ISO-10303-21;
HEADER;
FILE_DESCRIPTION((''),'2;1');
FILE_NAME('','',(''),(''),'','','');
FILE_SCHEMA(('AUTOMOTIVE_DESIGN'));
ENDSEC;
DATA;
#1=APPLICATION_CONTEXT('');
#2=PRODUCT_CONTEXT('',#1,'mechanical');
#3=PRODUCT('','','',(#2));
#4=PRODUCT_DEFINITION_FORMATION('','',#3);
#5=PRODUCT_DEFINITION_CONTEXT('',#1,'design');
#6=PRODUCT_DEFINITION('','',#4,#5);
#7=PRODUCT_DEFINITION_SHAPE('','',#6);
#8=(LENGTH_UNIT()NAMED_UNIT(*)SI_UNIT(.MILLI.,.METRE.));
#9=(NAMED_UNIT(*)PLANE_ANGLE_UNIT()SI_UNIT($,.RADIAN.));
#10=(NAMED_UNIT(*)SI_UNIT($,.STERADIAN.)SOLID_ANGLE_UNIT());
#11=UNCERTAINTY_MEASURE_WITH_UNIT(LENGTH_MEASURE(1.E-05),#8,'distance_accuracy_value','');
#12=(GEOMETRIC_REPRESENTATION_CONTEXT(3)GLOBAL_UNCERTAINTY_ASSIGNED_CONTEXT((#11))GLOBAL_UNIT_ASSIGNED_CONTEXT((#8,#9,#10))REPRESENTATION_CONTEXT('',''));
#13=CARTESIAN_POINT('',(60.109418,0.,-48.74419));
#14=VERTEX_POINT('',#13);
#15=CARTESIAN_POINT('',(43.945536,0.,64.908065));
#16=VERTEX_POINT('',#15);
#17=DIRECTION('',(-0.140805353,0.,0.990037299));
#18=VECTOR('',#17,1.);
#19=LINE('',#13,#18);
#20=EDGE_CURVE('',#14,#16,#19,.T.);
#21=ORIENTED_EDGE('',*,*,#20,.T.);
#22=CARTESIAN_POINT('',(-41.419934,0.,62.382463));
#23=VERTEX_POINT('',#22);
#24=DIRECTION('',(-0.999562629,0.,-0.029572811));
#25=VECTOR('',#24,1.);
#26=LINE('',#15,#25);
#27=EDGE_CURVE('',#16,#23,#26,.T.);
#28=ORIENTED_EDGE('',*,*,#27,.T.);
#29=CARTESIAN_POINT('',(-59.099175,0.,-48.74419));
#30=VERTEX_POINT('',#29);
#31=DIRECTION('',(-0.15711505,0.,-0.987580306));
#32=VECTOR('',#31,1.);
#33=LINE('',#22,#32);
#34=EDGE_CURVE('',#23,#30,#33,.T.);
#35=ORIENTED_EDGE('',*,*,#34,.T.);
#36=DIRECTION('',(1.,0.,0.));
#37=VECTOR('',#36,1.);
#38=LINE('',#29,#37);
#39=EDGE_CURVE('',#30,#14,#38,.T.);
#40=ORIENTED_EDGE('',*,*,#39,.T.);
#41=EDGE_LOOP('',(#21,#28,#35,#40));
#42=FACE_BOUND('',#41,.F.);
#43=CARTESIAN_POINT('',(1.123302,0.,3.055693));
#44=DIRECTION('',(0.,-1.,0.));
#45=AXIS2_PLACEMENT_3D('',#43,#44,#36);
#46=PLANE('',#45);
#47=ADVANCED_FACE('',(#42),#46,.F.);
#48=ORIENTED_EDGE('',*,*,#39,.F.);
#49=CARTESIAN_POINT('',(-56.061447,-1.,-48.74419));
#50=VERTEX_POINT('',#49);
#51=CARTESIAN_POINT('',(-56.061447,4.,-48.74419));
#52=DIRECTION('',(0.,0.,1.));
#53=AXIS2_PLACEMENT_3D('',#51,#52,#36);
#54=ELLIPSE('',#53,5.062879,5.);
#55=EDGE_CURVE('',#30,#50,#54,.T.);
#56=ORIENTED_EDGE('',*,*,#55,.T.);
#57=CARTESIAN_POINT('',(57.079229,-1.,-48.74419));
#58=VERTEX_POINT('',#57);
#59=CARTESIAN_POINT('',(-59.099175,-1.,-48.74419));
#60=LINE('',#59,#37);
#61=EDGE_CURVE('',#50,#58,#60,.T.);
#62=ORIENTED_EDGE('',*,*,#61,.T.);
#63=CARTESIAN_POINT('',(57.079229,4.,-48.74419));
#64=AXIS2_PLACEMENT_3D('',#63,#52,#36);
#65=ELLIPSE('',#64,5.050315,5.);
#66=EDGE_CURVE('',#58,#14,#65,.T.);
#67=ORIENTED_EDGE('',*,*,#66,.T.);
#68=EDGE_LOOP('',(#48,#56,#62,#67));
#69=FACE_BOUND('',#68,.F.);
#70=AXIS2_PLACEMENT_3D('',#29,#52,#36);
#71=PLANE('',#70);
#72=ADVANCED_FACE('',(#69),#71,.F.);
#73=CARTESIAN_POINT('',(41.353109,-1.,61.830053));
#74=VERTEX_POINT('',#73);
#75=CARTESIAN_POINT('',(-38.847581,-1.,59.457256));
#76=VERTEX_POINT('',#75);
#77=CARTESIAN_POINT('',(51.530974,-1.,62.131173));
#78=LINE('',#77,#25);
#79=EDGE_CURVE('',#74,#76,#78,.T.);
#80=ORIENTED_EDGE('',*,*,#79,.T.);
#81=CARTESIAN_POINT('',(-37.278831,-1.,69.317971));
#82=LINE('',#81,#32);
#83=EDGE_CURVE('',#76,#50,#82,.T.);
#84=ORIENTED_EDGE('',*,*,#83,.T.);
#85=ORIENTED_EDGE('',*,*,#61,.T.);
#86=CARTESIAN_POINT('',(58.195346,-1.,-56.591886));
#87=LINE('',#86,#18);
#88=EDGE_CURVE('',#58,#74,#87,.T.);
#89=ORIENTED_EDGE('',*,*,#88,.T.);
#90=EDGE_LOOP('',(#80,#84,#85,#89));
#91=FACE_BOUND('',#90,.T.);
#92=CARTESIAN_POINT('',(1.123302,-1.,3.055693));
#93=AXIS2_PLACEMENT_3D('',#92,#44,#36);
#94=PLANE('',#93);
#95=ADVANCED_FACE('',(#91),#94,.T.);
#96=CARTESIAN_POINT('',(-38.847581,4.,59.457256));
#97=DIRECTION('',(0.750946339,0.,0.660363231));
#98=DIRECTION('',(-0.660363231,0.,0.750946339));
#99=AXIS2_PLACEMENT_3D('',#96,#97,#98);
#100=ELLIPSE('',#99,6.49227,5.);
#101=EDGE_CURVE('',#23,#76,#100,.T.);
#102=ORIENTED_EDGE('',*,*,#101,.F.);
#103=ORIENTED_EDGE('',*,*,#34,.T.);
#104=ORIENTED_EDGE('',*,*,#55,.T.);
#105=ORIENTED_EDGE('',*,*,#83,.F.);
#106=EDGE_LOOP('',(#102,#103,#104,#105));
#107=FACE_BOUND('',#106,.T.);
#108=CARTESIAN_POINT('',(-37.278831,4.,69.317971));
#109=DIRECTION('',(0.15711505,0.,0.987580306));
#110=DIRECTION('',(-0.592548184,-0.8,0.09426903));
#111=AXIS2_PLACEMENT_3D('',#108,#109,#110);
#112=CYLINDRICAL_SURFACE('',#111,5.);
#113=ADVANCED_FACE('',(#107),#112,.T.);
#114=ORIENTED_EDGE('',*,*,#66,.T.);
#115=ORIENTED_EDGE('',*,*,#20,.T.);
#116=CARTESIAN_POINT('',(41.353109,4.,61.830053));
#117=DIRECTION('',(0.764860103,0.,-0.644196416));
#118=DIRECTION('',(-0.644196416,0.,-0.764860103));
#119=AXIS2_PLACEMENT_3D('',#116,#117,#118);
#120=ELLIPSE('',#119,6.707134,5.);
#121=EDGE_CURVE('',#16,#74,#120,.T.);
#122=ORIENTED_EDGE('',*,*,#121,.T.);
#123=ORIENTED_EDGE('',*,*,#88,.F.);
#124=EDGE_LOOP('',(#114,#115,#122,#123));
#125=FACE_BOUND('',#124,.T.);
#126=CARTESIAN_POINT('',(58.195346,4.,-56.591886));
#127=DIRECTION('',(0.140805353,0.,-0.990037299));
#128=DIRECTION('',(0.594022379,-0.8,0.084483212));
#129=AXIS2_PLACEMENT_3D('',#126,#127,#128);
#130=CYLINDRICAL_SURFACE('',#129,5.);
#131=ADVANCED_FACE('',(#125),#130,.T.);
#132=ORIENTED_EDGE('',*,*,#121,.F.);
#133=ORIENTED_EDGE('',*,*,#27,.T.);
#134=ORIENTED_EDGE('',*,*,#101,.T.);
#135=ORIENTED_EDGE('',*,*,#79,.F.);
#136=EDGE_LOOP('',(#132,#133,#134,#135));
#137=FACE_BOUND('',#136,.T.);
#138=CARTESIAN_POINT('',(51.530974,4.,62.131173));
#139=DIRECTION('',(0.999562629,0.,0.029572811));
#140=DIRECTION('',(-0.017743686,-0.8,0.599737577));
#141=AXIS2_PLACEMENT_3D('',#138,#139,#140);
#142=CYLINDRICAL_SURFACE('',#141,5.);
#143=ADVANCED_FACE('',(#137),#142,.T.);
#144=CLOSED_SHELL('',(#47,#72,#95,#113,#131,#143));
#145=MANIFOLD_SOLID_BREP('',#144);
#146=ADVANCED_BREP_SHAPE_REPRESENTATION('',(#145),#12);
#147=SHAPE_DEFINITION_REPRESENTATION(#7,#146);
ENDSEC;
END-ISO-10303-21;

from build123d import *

# Parameters (mm, degrees)
F1_DEPTH    = 1
F2_T1_DEPTH = 127.5241695926
F2_T3_DEPTH = 129.7959329915
F2_T5_DEPTH = 100.4028232355


# Not quite as in the source:
# - a fillet or chamfer that OpenCascade refuses, or shapes differently, is made with other operations: its cross-section is extruded or revolved along the edge and cut away or added


with BuildPart() as f1:
    # F0 (on Front) → F1 (new body)
    with BuildSketch(Plane.XZ):
        Polygon((43.9455360174, 64.9080649018), (-41.4199344814, 62.3824633658), (-59.099175036, -48.7441904843), (60.1094178855, -48.7441904843), align=None)
    extrude(amount=F1_DEPTH)

    # F2: fillet of radius 5 on 3 edges, made by hand

    # F2_s2 → F2_t1 (cut)
    with BuildSketch(Plane(origin=(9.8354016997, 0, 61.8225243777), x_dir=(0, 1, 0), z_dir=(-0.1571150502, 0, -0.9875803061))):
        with BuildLine():
            ThreePointArc((0, -50.7067354373), (-0.7434164903, -49.2878742674), (-1, -47.7067354373))
            Line((-1, -47.7067354373), (-1, -50.7067354373))
            Line((-1, -50.7067354373), (0, -50.7067354373))
        make_face()
    extrude(amount=F2_T1_DEPTH, mode=Mode.SUBTRACT)

    # F2_s4 → F2_t3 (cut)
    with BuildSketch(Plane(origin=(9.0428428438, 0, -63.5824669276), x_dir=(0, 1, 0), z_dir=(-0.140805353, 0, 0.9900372986))):
        with BuildLine():
            ThreePointArc((0, -52.6471227542), (-0.7434164903, -51.2282615843), (-1, -49.6471227542))
            Line((-1, -49.6471227542), (-1, -52.6471227542))
            Line((-1, -52.6471227542), (0, -52.6471227542))
        make_face()
    extrude(amount=F2_T3_DEPTH, mode=Mode.SUBTRACT)

    # F2_s6 → F2_t5 (cut)
    with BuildSketch(Plane(origin=(53.3224974993, 0, 1.5775861224), x_dir=(0, 1, 0), z_dir=(-0.9995626288, 0, -0.0295728108))):
        with BuildLine():
            ThreePointArc((0, -63.5800829589), (-0.7434164903, -62.161221789), (-1, -60.5800829589))
            Line((-1, -60.5800829589), (-1, -63.5800829589))
            Line((-1, -63.5800829589), (0, -63.5800829589))
        make_face()
    extrude(amount=F2_T5_DEPTH, mode=Mode.SUBTRACT)


solid = f1.part
